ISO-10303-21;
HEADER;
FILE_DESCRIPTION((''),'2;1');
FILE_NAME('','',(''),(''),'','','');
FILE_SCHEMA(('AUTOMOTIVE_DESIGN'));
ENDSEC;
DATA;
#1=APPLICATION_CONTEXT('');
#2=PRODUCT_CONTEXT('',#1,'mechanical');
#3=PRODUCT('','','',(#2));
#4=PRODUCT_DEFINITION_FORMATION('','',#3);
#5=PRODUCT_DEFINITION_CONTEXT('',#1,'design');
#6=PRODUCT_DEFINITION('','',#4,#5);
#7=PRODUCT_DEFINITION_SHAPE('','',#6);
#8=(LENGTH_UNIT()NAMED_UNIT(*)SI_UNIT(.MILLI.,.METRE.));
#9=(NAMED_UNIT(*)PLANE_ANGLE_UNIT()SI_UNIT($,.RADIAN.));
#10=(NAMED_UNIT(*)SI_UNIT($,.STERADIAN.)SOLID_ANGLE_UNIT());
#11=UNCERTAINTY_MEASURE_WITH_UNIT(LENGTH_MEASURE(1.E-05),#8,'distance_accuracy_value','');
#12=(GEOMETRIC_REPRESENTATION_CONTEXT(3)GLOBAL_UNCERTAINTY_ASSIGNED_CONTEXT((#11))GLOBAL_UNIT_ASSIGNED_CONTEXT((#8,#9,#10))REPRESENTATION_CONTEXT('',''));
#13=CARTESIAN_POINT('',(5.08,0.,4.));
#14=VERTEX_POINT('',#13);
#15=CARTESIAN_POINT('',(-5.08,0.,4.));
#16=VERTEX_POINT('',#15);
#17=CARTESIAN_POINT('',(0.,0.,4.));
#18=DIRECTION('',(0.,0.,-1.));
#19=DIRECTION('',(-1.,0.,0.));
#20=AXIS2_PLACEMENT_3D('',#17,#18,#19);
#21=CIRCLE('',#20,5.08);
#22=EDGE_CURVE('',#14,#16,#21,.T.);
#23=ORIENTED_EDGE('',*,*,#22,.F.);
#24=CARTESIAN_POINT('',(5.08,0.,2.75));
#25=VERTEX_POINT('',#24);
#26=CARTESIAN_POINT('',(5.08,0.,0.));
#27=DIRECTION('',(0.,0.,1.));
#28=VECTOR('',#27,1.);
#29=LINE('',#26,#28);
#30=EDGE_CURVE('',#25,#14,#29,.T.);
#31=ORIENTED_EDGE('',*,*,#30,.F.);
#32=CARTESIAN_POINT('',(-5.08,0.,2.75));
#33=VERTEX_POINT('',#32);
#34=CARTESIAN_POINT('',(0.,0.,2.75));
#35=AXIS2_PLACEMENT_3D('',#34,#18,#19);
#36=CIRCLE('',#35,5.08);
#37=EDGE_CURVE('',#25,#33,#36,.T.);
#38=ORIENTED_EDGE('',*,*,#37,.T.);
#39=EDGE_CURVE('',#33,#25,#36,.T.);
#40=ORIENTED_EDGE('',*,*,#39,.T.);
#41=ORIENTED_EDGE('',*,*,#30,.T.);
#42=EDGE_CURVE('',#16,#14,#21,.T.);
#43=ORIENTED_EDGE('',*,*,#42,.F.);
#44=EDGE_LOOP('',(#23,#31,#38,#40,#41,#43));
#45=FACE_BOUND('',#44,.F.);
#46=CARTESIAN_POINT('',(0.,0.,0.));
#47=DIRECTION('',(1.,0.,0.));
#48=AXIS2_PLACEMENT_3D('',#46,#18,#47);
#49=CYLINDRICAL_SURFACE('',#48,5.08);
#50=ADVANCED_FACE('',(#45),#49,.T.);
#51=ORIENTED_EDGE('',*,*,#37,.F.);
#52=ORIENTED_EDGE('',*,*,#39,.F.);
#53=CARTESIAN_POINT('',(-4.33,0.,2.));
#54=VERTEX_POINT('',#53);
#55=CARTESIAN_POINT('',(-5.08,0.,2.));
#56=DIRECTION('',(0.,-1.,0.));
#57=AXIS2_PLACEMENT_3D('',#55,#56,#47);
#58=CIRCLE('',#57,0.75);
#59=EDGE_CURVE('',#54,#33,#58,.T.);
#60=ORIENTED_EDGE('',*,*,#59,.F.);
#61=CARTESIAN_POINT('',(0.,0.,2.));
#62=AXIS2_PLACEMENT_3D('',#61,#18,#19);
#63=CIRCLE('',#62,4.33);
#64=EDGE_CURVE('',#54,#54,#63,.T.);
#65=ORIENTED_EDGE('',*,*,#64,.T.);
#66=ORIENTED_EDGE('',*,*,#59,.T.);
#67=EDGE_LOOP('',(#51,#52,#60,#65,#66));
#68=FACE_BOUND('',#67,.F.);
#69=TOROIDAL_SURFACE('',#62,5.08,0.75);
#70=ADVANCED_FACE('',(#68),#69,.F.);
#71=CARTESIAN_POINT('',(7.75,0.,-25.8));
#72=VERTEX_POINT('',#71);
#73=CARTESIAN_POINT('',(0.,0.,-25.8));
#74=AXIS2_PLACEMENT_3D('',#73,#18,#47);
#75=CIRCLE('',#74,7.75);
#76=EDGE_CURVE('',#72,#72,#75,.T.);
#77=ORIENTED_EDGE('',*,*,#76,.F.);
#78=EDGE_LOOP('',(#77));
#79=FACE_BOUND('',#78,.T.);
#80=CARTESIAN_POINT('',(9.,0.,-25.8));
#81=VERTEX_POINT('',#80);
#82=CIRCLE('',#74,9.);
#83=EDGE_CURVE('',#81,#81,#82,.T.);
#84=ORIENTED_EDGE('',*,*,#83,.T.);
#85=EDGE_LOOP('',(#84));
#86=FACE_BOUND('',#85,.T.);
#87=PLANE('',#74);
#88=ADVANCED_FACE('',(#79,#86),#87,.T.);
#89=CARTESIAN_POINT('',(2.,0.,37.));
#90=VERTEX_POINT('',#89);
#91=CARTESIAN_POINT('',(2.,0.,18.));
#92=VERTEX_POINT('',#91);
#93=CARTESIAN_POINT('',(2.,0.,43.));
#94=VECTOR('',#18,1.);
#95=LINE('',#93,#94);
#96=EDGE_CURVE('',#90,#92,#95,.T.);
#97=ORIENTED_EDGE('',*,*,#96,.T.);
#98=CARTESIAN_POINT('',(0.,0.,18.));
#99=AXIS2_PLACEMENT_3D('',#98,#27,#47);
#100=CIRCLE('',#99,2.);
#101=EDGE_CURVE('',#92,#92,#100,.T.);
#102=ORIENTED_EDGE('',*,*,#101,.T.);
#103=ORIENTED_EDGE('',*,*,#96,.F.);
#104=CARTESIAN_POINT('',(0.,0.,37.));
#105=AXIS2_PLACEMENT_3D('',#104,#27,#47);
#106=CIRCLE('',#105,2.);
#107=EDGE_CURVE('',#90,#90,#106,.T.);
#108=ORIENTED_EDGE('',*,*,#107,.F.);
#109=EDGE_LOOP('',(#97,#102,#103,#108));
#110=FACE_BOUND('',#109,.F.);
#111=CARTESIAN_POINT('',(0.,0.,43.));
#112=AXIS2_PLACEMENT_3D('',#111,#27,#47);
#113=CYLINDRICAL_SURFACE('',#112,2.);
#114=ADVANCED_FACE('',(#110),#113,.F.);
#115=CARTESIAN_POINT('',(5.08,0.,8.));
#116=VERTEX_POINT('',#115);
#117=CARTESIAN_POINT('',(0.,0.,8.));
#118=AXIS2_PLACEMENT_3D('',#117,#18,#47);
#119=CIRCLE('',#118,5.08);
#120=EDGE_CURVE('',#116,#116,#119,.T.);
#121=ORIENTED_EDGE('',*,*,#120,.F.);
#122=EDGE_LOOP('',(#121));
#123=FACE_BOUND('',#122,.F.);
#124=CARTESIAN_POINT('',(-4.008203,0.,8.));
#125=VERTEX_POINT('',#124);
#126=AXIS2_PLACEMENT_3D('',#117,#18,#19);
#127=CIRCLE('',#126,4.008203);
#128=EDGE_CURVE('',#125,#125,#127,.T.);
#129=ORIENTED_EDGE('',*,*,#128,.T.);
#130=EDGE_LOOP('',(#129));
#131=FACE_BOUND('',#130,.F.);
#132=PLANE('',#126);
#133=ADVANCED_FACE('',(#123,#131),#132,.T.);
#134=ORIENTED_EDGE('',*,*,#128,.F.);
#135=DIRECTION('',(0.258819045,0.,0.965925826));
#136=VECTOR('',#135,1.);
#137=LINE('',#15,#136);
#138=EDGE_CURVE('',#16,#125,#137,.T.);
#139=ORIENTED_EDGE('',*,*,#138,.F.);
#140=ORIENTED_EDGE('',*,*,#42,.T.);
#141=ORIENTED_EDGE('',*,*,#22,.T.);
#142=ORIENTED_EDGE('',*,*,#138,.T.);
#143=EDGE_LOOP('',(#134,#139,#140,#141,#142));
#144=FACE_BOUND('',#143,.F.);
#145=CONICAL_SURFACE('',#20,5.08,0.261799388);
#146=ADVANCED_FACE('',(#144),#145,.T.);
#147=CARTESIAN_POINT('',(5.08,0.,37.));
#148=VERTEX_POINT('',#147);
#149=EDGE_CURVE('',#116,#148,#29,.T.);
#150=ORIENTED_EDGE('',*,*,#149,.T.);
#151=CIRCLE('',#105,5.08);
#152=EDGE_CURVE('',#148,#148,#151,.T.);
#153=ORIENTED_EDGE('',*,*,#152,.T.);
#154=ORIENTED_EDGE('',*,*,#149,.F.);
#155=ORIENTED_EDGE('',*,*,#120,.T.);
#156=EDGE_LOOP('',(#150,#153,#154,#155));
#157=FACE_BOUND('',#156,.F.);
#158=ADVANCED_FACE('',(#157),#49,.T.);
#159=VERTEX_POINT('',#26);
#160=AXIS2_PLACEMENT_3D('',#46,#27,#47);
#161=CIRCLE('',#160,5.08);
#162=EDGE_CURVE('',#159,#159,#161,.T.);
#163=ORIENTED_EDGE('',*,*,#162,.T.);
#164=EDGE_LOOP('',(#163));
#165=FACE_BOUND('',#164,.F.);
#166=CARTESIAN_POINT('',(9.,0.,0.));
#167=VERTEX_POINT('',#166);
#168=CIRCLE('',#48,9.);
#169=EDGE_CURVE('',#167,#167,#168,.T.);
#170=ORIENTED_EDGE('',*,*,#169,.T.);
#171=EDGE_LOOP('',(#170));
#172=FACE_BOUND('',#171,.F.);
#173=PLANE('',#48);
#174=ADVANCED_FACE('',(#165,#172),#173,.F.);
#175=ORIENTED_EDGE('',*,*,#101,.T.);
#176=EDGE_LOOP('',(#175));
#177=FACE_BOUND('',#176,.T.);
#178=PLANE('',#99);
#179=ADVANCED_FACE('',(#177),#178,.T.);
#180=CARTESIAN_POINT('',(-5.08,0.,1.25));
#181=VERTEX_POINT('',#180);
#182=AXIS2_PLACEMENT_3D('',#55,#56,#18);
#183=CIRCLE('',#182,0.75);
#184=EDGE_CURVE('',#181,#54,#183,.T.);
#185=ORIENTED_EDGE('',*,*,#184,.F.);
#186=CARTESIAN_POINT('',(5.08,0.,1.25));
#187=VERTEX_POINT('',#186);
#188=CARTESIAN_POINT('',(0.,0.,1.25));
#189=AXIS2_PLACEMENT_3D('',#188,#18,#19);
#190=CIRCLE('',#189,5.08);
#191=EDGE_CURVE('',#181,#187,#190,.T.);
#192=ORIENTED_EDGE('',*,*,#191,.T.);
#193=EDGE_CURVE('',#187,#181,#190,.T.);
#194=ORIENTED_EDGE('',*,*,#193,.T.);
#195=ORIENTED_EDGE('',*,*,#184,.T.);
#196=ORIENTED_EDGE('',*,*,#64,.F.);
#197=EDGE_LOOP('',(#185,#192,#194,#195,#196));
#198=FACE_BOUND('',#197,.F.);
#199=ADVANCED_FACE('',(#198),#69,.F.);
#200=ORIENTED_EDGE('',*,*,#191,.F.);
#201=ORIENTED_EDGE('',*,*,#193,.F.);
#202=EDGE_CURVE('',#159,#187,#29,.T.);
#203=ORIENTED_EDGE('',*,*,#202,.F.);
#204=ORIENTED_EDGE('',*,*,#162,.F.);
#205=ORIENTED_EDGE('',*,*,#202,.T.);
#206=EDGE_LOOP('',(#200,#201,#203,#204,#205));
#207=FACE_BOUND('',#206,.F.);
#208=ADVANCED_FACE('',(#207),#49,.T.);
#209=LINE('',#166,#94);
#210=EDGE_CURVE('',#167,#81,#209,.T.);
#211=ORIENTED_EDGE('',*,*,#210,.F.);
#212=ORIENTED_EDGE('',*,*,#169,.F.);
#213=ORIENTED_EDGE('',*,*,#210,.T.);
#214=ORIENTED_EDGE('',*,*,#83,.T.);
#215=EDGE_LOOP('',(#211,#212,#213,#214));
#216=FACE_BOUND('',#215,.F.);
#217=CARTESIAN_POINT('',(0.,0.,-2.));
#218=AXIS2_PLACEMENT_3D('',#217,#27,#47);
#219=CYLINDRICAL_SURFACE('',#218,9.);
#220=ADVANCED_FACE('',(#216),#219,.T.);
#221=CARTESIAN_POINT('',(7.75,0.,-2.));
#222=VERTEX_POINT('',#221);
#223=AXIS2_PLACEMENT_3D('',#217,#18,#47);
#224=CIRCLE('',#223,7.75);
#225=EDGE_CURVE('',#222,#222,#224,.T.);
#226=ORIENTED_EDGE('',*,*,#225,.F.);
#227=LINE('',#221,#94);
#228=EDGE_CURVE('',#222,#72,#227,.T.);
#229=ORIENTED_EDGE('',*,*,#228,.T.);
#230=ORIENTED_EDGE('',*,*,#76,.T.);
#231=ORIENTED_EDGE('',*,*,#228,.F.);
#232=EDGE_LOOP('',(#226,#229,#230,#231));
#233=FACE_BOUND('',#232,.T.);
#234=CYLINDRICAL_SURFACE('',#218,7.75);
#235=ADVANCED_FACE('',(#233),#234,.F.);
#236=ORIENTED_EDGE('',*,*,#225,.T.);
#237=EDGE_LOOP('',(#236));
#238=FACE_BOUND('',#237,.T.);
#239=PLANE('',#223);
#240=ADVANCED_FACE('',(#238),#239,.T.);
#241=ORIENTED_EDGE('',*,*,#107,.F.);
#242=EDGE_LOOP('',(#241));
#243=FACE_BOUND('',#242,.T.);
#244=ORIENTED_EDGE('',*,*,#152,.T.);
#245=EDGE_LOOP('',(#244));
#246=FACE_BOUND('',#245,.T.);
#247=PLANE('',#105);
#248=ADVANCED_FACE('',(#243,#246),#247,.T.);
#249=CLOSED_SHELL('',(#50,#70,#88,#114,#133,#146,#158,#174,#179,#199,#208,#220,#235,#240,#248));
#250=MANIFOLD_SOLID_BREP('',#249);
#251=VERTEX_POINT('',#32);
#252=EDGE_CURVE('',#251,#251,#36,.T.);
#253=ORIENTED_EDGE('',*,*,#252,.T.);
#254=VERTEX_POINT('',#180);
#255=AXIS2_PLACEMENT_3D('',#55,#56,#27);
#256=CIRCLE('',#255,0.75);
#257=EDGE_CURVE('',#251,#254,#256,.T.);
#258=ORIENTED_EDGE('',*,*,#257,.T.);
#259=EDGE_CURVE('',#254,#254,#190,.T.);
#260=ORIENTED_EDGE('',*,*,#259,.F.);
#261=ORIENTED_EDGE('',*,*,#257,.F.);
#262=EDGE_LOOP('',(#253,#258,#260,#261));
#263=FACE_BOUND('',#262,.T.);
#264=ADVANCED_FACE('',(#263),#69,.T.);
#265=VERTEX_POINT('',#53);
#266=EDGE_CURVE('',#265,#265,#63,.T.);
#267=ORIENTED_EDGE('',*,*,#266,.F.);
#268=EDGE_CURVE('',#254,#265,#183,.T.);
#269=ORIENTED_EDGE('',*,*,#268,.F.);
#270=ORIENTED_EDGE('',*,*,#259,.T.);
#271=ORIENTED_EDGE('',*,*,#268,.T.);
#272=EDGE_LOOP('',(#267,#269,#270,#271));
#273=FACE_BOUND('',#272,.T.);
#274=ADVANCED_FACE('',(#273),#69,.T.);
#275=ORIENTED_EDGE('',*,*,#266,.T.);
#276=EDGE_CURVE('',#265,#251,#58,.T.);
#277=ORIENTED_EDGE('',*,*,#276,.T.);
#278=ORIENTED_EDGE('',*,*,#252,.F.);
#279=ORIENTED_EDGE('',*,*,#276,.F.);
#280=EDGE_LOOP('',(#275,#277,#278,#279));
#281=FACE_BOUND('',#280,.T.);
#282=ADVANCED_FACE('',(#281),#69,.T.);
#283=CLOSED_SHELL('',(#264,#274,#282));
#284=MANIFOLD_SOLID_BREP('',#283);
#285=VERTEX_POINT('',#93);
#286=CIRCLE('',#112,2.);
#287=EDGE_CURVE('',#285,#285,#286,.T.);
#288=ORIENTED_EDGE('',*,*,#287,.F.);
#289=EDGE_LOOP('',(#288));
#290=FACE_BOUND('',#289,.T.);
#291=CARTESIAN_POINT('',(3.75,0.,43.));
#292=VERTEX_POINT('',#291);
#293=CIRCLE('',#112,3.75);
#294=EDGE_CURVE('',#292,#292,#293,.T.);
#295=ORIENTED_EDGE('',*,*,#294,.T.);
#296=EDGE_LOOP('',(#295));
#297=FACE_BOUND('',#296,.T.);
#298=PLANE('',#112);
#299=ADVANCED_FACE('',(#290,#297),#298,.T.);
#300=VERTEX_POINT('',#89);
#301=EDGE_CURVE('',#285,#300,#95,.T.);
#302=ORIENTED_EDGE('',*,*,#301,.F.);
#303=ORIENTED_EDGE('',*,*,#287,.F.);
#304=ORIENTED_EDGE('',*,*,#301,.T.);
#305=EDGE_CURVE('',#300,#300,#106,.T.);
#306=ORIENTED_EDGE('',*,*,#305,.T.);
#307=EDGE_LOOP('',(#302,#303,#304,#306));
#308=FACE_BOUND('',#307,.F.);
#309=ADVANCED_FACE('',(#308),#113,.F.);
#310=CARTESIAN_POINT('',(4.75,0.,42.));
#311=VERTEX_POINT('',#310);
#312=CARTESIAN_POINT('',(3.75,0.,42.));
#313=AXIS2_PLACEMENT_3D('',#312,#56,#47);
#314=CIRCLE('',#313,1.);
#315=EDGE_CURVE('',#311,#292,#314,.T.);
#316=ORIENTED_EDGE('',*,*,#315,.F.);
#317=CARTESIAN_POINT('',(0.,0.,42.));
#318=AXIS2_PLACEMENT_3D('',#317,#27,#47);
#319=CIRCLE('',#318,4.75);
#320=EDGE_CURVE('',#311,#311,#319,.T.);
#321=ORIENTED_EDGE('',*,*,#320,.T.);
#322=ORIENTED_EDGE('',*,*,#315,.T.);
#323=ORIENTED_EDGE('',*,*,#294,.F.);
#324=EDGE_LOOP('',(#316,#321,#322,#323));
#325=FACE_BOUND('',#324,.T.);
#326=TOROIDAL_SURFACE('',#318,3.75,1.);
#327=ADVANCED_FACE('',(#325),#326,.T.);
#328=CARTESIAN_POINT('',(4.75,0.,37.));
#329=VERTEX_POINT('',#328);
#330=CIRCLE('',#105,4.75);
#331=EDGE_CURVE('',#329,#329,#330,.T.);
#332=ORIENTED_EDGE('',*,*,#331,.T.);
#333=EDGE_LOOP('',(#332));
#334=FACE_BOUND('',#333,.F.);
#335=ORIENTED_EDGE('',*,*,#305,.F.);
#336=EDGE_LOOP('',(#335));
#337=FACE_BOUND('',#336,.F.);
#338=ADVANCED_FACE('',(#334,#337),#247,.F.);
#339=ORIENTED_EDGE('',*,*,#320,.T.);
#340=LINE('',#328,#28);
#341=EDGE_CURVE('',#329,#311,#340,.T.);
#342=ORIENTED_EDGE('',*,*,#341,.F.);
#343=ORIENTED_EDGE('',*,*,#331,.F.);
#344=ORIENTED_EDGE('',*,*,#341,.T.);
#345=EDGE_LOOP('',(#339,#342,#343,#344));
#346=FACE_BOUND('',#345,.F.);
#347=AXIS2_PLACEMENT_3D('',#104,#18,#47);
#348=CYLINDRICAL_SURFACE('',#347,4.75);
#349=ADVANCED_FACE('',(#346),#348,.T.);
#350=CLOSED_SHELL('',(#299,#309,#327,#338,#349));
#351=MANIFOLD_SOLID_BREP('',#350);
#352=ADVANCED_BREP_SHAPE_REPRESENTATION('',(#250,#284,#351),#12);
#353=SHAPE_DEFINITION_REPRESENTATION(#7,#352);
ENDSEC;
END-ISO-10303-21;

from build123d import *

# Parameters (mm, degrees)
F0_R      = 5.08
F1_DEPTH  = 37
F2_R      = 9
F3_DEPTH  = 2
F4_R      = 9
F4_R_2    = 7.75
F5_DEPTH  = 23.8
F6_R      = 4.75
F7_DEPTH  = 6
F8_R      = 1
F13_R     = 2
F14_DEPTH = 25


with BuildPart() as f1:
    # F0 (on Top) → F1 (new body)
    with BuildSketch(Plane.XY):
        Circle(F0_R)
    extrude(amount=F1_DEPTH)

    # F2 (on face) → F3 (join)
    with BuildSketch(Plane(origin=(0, 0, 0), x_dir=(1, 0, 0), z_dir=(0, 0, -1))):
        Circle(F2_R)
    extrude(amount=F3_DEPTH)

    # F4 (on face) → F5 (join)
    with BuildSketch(Plane(origin=(0, 0, -2), x_dir=(1, 0, 0), z_dir=(0, 0, -1))):
        Circle(F4_R)
        Circle(F4_R_2, mode=Mode.SUBTRACT)
    extrude(amount=F5_DEPTH)

    # F9 (on Front) → F10 (revolve, cut)
    with BuildSketch(Plane.XZ):
        Polygon((-5.08, 8), (-5.08, 4), (-4.0082032303, 8), align=None)
    revolve(axis=Axis((0, 0, 0), (0, 0, -1)), mode=Mode.SUBTRACT)

    # F9 (on Front) → F11 (revolve, cut)
    with BuildSketch(Plane.XZ):
        with BuildLine():
            Line((-5.08, 1.25), (-5.08, 2.75))
            ThreePointArc((-5.08, 2.75), (-5.83, 2), (-5.08, 1.25))
        make_face()
        with BuildLine():
            ThreePointArc((-4.33, 2), (-4.5496699141, 2.5303300859), (-5.08, 2.75))
            Line((-5.08, 2.75), (-5.08, 1.25))
            ThreePointArc((-5.08, 1.25), (-4.5496699141, 1.4696699141), (-4.33, 2))
        make_face()
    revolve(axis=Axis((0, 0, 0), (0, 0, -1)), mode=Mode.SUBTRACT)


with BuildPart() as f7:
    # F6 (on face) → F7 (new body)
    with BuildSketch(Plane.XY.offset(37)):
        Circle(F6_R)
    extrude(amount=F7_DEPTH)

    # F8
    f8_edges = [f7.edges().sort_by_distance(p)[0] for p in [
        (-4.75, 0, 43),
    ]]
    fillet(f8_edges, radius=F8_R)


with BuildPart() as f12:
    # F9 (on Front) → F12 (revolve)
    with BuildSketch(Plane.XZ):
        with BuildLine():
            ThreePointArc((-4.33, 2), (-4.5496699141, 2.5303300859), (-5.08, 2.75))
            Line((-5.08, 2.75), (-5.08, 1.25))
            ThreePointArc((-5.08, 1.25), (-4.5496699141, 1.4696699141), (-4.33, 2))
        make_face()
        with BuildLine():
            Line((-5.08, 1.25), (-5.08, 2.75))
            ThreePointArc((-5.08, 2.75), (-5.83, 2), (-5.08, 1.25))
        make_face()
    revolve(axis=Axis((0, 0, 0), (0, 0, -1)))


with BuildPart() as f14_tool:
    # F13 (on face) → F14 (new body)
    with BuildSketch(Plane.XY.offset(43)):
        Circle(F13_R)
    extrude(amount=-F14_DEPTH)


with BuildPart() as f1_1:
    add(f1.part)

    # F14: cut by f14_tool
    add(f14_tool.part, mode=Mode.SUBTRACT)


with BuildPart() as f7_1:
    add(f7.part)

    # F14: cut by f14_tool
    add(f14_tool.part, mode=Mode.SUBTRACT)


solid = Compound([f12.part, f1_1.part, f7_1.part])
